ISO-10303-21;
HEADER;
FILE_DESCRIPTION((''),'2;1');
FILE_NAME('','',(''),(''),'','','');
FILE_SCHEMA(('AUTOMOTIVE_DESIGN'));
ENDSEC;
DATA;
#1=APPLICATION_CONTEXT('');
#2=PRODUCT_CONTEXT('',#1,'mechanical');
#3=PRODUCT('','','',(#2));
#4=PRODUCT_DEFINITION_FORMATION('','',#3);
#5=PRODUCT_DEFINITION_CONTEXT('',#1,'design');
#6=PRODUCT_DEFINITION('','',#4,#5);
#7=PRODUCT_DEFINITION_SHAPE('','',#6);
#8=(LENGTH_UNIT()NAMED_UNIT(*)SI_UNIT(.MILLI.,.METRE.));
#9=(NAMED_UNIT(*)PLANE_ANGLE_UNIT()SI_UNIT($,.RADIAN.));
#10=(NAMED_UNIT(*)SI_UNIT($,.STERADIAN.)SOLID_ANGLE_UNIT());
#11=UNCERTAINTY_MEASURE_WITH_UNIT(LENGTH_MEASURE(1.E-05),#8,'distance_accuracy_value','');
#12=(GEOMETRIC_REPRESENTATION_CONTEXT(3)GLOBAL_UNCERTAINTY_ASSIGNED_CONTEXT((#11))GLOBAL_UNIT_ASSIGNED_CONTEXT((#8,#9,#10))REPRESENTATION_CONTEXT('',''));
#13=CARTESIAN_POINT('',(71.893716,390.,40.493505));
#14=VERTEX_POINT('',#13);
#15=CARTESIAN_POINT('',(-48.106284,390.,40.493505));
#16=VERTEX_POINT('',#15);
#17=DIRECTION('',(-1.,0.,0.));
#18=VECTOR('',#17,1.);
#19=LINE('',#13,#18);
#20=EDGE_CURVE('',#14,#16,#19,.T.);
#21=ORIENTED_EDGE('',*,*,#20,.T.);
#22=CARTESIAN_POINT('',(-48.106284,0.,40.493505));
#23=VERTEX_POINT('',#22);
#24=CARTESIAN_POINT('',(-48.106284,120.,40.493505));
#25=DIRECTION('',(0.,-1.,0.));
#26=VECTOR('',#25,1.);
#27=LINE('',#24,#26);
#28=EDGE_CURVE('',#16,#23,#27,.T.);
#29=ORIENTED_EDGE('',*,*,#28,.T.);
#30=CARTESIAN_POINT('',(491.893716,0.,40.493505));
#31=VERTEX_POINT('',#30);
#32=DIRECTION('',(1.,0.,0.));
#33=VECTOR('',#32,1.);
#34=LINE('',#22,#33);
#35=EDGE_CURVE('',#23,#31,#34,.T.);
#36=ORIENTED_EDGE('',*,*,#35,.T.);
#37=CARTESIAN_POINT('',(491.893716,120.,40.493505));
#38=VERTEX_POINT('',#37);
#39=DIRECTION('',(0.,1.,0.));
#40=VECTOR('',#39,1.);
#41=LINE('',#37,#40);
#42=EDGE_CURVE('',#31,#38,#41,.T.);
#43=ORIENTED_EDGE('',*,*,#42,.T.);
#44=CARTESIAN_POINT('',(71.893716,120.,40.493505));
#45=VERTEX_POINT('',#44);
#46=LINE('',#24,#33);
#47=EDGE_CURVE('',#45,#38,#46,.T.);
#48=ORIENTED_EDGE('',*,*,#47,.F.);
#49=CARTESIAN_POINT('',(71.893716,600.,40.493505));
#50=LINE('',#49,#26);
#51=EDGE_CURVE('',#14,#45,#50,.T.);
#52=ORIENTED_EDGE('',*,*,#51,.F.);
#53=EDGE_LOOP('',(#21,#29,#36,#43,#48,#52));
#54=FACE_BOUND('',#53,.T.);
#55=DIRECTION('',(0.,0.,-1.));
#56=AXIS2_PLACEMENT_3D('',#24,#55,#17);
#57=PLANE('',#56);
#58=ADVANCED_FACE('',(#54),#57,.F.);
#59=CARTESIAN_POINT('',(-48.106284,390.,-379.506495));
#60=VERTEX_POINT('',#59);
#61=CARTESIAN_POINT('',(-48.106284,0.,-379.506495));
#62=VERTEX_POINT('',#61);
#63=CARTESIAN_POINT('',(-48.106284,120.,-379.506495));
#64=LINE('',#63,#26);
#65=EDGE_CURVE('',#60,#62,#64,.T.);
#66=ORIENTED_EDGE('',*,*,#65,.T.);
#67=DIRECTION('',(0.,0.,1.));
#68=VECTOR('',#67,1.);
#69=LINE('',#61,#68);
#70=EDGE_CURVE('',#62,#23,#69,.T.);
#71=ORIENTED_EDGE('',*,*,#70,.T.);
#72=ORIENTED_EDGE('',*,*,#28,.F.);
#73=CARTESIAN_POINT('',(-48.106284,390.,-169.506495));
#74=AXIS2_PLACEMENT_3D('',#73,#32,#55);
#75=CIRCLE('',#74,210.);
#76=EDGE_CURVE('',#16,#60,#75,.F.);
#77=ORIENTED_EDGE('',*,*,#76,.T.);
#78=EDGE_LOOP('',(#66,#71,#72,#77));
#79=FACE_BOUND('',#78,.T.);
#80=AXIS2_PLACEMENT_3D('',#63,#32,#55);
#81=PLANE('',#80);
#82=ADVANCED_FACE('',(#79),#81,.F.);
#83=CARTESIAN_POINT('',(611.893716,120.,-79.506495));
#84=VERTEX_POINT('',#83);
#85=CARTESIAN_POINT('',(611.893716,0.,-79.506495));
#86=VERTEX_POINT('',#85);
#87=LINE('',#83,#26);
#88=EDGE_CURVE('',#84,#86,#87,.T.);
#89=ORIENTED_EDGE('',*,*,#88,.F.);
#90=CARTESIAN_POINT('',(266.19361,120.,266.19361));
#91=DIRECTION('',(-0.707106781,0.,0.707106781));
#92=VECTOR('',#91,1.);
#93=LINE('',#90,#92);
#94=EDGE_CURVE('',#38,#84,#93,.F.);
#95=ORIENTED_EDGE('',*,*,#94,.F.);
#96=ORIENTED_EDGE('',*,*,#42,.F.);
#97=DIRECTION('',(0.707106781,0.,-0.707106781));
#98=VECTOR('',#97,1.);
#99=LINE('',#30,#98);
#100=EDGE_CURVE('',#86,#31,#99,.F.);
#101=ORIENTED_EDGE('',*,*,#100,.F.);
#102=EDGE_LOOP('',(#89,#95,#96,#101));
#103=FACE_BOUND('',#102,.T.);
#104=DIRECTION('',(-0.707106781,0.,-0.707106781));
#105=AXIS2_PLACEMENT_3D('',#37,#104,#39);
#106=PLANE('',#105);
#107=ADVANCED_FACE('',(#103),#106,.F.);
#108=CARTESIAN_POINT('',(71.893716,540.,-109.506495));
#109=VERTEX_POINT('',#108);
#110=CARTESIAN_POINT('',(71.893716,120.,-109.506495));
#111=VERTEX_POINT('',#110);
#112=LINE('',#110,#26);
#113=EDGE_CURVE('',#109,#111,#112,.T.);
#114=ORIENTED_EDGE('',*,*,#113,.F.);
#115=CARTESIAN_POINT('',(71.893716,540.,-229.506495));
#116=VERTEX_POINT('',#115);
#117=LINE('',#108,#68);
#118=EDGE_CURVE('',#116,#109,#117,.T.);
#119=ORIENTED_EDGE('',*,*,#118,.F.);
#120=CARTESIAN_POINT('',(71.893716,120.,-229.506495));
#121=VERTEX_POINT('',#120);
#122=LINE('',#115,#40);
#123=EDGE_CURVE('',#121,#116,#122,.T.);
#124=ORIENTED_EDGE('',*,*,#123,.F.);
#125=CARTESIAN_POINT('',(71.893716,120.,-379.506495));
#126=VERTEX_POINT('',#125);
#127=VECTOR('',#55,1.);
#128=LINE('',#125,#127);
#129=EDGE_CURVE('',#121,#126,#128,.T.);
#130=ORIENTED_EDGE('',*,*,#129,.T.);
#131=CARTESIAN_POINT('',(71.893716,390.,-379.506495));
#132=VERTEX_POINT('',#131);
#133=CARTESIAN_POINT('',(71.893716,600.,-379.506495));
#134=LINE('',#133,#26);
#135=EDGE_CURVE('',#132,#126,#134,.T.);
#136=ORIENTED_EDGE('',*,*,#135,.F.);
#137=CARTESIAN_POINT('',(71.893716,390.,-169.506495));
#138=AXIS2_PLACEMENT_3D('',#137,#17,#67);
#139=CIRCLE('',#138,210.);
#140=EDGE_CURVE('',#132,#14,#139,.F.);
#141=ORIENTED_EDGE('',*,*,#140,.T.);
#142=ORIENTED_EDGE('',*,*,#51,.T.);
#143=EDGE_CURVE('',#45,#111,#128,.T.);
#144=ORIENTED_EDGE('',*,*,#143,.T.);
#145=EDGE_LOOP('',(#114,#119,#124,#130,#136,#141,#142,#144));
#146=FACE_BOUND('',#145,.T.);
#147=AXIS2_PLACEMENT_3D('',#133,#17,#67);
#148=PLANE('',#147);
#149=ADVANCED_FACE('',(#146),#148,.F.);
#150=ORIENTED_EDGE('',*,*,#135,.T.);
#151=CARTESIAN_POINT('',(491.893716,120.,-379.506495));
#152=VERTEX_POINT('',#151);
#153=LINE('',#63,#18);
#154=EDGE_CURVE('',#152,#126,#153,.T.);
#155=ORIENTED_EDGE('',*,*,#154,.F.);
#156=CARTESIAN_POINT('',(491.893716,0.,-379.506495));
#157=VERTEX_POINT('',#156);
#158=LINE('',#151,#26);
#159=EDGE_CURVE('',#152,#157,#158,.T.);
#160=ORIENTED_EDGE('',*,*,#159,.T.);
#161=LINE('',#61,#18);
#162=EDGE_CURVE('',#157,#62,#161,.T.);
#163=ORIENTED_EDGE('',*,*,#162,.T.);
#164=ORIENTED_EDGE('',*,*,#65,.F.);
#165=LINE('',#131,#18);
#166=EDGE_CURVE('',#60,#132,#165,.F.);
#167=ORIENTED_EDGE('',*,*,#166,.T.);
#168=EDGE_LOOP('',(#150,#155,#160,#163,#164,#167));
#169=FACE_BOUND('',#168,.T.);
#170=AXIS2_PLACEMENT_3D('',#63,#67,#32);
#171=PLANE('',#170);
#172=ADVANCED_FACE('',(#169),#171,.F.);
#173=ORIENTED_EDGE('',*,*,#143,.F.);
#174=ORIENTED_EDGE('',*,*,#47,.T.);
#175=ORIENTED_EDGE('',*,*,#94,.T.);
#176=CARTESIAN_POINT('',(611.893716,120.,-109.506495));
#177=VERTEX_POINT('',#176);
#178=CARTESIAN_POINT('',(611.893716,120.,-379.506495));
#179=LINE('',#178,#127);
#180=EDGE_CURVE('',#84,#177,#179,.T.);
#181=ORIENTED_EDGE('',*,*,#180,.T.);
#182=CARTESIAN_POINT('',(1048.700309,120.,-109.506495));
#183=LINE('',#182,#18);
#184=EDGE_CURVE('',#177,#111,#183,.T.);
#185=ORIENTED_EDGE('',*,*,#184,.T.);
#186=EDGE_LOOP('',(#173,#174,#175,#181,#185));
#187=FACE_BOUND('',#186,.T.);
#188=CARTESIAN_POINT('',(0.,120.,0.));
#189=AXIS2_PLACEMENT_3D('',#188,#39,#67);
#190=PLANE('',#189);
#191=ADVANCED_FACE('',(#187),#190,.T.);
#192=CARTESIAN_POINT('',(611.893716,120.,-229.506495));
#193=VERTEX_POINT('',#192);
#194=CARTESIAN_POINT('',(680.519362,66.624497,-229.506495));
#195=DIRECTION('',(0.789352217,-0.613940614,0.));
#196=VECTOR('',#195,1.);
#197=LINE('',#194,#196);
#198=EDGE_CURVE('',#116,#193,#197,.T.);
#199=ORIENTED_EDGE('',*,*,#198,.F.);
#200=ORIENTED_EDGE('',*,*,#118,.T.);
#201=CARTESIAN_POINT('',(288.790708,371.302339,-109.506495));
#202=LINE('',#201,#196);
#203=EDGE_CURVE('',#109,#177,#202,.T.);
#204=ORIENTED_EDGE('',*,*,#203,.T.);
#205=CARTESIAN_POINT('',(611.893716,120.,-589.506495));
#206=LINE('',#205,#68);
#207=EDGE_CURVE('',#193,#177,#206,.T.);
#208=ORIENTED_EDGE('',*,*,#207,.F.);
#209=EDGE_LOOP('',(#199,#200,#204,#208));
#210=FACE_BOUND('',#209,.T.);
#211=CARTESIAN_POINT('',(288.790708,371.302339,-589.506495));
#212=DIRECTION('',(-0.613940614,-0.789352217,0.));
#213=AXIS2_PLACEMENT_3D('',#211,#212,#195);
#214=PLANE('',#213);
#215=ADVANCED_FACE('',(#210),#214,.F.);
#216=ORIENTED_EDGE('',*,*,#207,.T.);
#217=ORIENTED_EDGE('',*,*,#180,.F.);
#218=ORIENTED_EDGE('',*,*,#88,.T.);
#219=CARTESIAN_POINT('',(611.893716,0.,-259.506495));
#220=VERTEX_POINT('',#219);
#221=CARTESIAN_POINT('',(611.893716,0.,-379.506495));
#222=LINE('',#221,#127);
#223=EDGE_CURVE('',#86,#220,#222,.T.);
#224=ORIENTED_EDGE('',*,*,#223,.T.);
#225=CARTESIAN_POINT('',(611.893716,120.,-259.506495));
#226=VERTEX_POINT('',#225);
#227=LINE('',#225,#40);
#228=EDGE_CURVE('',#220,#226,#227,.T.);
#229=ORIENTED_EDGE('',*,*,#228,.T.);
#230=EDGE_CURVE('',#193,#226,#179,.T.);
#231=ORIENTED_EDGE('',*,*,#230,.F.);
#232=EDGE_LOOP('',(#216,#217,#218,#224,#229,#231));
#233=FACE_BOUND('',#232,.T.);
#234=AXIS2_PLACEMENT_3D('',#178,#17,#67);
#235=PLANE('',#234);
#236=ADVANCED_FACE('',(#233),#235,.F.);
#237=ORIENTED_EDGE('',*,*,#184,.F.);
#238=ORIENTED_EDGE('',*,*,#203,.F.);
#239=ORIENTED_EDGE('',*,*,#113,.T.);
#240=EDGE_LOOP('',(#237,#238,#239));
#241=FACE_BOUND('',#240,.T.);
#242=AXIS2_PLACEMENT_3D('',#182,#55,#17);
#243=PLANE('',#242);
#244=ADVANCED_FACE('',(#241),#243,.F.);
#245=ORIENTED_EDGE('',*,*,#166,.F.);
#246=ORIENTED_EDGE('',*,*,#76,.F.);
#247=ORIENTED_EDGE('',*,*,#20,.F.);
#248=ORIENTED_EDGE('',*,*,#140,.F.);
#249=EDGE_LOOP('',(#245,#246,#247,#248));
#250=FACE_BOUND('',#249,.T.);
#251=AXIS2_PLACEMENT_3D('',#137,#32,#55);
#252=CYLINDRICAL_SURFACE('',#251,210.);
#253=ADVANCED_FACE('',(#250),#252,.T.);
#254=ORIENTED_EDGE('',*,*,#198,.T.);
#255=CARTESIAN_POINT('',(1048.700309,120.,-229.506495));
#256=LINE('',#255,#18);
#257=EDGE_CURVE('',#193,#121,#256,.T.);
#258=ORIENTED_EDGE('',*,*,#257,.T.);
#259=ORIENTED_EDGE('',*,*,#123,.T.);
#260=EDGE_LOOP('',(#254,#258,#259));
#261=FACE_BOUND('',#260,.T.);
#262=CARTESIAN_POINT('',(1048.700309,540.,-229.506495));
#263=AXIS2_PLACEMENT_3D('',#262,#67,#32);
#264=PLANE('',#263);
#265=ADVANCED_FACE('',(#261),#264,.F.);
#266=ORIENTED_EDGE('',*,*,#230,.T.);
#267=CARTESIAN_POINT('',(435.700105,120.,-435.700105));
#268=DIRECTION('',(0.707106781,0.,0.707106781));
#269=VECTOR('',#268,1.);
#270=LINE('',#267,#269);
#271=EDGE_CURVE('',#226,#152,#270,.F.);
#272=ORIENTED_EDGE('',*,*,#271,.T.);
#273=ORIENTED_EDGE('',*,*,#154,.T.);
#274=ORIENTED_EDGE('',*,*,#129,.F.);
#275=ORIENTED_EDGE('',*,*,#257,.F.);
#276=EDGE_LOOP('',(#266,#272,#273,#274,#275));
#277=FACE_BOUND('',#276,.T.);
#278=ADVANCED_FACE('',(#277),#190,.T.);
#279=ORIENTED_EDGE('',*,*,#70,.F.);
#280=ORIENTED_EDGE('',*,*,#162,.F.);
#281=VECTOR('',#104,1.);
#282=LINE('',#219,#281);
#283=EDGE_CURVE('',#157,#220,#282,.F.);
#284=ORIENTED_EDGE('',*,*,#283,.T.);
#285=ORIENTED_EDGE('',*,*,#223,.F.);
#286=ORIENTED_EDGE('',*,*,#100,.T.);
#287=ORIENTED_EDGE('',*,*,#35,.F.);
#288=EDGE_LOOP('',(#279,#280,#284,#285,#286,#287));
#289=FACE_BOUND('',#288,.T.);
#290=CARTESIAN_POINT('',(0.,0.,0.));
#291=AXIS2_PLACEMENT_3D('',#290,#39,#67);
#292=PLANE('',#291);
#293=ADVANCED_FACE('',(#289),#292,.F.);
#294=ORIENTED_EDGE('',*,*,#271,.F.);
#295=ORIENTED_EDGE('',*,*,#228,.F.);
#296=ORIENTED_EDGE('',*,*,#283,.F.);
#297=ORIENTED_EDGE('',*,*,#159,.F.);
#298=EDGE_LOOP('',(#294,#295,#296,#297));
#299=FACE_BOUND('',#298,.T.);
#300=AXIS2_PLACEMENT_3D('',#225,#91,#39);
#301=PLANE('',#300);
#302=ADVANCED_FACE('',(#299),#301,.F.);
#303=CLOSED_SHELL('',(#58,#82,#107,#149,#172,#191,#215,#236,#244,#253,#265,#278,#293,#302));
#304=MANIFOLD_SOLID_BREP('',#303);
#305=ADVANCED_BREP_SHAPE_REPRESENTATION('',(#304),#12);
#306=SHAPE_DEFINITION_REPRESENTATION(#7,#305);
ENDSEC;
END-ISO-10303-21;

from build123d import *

# Parameters (mm, degrees)
SKETCH1_W           = 660
SKETCH1_H           = 420
BOSS_EXTRUDE1_DEPTH = 120
SKETCH2_W           = 120
SKETCH2_H           = 420
BOSS_EXTRUDE2_DEPTH = 480
FILLET1_RADIUS      = 210
FILLET1_LENGTH      = 120
CHAMFER1_START      = 376.454614173
CHAMFER1_OUTLINE_W  = 172
CHAMFER1_OUTLINE_H  = 120
CHAMFER1_DEPTH      = 85.545385827
CHAMFER2_START      = 616.17299772
CHAMFER2_OUTLINE_W  = 173
CHAMFER2_OUTLINE_H  = 120
CHAMFER2_DEPTH      = 85.82700228
SKETCH4_W           = 120
SKETCH4_H           = 420
BOSS_EXTRUDE3_DEPTH = 540
CUT_EXTRUDE1_DEPTH  = 480


with BuildPart() as part:
    # Sketch1 → Boss-Extrude1 (new body)
    with BuildSketch(Plane(origin=(0, 0, 0), x_dir=(1, 0, 0), z_dir=(0, 1, 0))):
        with Locations((281.893715562, 169.506494581)):
            Rectangle(SKETCH1_W, SKETCH1_H)
    extrude(amount=BOSS_EXTRUDE1_DEPTH)

    # Sketch2 → Boss-Extrude2 (add)
    with BuildSketch(Plane(origin=(0, 120, 0), x_dir=(1, 0, 0), z_dir=(0, 1, 0))):
        with Locations((11.893715562, 169.506494581)):
            Rectangle(SKETCH2_W, SKETCH2_H)
    extrude(amount=BOSS_EXTRUDE2_DEPTH)

    # Fillet1: full round fillet: the end face becomes a half cylinder, R = half its width
    fillet1_face = Plane((11.893715562, 600, -169.506494581), x_dir=(1, 0, 0), z_dir=(0, 1, 0))  # on the end face: x along it, z out of the body
    fillet1_slab = fillet1_face.offset(-FILLET1_RADIUS / 2) * Box(FILLET1_LENGTH, 2 * FILLET1_RADIUS, FILLET1_RADIUS, mode=Mode.PRIVATE)  # the body's end, R deep
    fillet1_round = Plane((11.893715562, 390, -169.506494581), x_dir=(0, 1, 0), z_dir=(1, 0, 0)) * Cylinder(FILLET1_RADIUS, FILLET1_LENGTH, mode=Mode.PRIVATE)  # its axis R under the face
    add(fillet1_slab - fillet1_round, mode=Mode.SUBTRACT)

    # Chamfer1: read off the stored shape, not the designer's step
    # Chamfer1 outline → Chamfer1 (cut)
    with BuildSketch(Plane(origin=(0, 0, 0), x_dir=(0.7071067811865471, 0, -0.707106781186548), z_dir=(0.707106781186548, 0, 0.707106781186547)).offset(CHAMFER1_START)):
        with Locations((404, 60)):
            Rectangle(CHAMFER1_OUTLINE_W, CHAMFER1_OUTLINE_H)
    extrude(amount=CHAMFER1_DEPTH, mode=Mode.SUBTRACT)

    # Chamfer2: read off the stored shape, not the designer's step
    # Chamfer2 outline → Chamfer2 (cut)
    with BuildSketch(Plane(origin=(0, 0, 0), x_dir=(0.707106781186548, 0, 0.707106781186547), z_dir=(0.707106781186547, 0, -0.707106781186548)).offset(CHAMFER2_START)):
        with Locations((164.5, -60)):
            Rectangle(CHAMFER2_OUTLINE_W, CHAMFER2_OUTLINE_H)
    extrude(amount=CHAMFER2_DEPTH, mode=Mode.SUBTRACT)

    # Sketch4 → Boss-Extrude3 (add)
    with BuildSketch(Plane(origin=(71.893715562, 0, 0), x_dir=(0, 0, -1), z_dir=(1, 0, 0))):
        with Locations((169.506494581, 330)):
            Rectangle(SKETCH4_W, SKETCH4_H)
    extrude(amount=BOSS_EXTRUDE3_DEPTH)

    # Sketch7 → Cut-Extrude1 (cut)
    with BuildSketch(Plane.XY.offset(-109.506494581)):
        Polygon((71.893715562, 540), (611.893715562, 120), (611.893715562, 540), align=None)
    extrude(amount=-CUT_EXTRUDE1_DEPTH, mode=Mode.SUBTRACT)


solid = part.part
